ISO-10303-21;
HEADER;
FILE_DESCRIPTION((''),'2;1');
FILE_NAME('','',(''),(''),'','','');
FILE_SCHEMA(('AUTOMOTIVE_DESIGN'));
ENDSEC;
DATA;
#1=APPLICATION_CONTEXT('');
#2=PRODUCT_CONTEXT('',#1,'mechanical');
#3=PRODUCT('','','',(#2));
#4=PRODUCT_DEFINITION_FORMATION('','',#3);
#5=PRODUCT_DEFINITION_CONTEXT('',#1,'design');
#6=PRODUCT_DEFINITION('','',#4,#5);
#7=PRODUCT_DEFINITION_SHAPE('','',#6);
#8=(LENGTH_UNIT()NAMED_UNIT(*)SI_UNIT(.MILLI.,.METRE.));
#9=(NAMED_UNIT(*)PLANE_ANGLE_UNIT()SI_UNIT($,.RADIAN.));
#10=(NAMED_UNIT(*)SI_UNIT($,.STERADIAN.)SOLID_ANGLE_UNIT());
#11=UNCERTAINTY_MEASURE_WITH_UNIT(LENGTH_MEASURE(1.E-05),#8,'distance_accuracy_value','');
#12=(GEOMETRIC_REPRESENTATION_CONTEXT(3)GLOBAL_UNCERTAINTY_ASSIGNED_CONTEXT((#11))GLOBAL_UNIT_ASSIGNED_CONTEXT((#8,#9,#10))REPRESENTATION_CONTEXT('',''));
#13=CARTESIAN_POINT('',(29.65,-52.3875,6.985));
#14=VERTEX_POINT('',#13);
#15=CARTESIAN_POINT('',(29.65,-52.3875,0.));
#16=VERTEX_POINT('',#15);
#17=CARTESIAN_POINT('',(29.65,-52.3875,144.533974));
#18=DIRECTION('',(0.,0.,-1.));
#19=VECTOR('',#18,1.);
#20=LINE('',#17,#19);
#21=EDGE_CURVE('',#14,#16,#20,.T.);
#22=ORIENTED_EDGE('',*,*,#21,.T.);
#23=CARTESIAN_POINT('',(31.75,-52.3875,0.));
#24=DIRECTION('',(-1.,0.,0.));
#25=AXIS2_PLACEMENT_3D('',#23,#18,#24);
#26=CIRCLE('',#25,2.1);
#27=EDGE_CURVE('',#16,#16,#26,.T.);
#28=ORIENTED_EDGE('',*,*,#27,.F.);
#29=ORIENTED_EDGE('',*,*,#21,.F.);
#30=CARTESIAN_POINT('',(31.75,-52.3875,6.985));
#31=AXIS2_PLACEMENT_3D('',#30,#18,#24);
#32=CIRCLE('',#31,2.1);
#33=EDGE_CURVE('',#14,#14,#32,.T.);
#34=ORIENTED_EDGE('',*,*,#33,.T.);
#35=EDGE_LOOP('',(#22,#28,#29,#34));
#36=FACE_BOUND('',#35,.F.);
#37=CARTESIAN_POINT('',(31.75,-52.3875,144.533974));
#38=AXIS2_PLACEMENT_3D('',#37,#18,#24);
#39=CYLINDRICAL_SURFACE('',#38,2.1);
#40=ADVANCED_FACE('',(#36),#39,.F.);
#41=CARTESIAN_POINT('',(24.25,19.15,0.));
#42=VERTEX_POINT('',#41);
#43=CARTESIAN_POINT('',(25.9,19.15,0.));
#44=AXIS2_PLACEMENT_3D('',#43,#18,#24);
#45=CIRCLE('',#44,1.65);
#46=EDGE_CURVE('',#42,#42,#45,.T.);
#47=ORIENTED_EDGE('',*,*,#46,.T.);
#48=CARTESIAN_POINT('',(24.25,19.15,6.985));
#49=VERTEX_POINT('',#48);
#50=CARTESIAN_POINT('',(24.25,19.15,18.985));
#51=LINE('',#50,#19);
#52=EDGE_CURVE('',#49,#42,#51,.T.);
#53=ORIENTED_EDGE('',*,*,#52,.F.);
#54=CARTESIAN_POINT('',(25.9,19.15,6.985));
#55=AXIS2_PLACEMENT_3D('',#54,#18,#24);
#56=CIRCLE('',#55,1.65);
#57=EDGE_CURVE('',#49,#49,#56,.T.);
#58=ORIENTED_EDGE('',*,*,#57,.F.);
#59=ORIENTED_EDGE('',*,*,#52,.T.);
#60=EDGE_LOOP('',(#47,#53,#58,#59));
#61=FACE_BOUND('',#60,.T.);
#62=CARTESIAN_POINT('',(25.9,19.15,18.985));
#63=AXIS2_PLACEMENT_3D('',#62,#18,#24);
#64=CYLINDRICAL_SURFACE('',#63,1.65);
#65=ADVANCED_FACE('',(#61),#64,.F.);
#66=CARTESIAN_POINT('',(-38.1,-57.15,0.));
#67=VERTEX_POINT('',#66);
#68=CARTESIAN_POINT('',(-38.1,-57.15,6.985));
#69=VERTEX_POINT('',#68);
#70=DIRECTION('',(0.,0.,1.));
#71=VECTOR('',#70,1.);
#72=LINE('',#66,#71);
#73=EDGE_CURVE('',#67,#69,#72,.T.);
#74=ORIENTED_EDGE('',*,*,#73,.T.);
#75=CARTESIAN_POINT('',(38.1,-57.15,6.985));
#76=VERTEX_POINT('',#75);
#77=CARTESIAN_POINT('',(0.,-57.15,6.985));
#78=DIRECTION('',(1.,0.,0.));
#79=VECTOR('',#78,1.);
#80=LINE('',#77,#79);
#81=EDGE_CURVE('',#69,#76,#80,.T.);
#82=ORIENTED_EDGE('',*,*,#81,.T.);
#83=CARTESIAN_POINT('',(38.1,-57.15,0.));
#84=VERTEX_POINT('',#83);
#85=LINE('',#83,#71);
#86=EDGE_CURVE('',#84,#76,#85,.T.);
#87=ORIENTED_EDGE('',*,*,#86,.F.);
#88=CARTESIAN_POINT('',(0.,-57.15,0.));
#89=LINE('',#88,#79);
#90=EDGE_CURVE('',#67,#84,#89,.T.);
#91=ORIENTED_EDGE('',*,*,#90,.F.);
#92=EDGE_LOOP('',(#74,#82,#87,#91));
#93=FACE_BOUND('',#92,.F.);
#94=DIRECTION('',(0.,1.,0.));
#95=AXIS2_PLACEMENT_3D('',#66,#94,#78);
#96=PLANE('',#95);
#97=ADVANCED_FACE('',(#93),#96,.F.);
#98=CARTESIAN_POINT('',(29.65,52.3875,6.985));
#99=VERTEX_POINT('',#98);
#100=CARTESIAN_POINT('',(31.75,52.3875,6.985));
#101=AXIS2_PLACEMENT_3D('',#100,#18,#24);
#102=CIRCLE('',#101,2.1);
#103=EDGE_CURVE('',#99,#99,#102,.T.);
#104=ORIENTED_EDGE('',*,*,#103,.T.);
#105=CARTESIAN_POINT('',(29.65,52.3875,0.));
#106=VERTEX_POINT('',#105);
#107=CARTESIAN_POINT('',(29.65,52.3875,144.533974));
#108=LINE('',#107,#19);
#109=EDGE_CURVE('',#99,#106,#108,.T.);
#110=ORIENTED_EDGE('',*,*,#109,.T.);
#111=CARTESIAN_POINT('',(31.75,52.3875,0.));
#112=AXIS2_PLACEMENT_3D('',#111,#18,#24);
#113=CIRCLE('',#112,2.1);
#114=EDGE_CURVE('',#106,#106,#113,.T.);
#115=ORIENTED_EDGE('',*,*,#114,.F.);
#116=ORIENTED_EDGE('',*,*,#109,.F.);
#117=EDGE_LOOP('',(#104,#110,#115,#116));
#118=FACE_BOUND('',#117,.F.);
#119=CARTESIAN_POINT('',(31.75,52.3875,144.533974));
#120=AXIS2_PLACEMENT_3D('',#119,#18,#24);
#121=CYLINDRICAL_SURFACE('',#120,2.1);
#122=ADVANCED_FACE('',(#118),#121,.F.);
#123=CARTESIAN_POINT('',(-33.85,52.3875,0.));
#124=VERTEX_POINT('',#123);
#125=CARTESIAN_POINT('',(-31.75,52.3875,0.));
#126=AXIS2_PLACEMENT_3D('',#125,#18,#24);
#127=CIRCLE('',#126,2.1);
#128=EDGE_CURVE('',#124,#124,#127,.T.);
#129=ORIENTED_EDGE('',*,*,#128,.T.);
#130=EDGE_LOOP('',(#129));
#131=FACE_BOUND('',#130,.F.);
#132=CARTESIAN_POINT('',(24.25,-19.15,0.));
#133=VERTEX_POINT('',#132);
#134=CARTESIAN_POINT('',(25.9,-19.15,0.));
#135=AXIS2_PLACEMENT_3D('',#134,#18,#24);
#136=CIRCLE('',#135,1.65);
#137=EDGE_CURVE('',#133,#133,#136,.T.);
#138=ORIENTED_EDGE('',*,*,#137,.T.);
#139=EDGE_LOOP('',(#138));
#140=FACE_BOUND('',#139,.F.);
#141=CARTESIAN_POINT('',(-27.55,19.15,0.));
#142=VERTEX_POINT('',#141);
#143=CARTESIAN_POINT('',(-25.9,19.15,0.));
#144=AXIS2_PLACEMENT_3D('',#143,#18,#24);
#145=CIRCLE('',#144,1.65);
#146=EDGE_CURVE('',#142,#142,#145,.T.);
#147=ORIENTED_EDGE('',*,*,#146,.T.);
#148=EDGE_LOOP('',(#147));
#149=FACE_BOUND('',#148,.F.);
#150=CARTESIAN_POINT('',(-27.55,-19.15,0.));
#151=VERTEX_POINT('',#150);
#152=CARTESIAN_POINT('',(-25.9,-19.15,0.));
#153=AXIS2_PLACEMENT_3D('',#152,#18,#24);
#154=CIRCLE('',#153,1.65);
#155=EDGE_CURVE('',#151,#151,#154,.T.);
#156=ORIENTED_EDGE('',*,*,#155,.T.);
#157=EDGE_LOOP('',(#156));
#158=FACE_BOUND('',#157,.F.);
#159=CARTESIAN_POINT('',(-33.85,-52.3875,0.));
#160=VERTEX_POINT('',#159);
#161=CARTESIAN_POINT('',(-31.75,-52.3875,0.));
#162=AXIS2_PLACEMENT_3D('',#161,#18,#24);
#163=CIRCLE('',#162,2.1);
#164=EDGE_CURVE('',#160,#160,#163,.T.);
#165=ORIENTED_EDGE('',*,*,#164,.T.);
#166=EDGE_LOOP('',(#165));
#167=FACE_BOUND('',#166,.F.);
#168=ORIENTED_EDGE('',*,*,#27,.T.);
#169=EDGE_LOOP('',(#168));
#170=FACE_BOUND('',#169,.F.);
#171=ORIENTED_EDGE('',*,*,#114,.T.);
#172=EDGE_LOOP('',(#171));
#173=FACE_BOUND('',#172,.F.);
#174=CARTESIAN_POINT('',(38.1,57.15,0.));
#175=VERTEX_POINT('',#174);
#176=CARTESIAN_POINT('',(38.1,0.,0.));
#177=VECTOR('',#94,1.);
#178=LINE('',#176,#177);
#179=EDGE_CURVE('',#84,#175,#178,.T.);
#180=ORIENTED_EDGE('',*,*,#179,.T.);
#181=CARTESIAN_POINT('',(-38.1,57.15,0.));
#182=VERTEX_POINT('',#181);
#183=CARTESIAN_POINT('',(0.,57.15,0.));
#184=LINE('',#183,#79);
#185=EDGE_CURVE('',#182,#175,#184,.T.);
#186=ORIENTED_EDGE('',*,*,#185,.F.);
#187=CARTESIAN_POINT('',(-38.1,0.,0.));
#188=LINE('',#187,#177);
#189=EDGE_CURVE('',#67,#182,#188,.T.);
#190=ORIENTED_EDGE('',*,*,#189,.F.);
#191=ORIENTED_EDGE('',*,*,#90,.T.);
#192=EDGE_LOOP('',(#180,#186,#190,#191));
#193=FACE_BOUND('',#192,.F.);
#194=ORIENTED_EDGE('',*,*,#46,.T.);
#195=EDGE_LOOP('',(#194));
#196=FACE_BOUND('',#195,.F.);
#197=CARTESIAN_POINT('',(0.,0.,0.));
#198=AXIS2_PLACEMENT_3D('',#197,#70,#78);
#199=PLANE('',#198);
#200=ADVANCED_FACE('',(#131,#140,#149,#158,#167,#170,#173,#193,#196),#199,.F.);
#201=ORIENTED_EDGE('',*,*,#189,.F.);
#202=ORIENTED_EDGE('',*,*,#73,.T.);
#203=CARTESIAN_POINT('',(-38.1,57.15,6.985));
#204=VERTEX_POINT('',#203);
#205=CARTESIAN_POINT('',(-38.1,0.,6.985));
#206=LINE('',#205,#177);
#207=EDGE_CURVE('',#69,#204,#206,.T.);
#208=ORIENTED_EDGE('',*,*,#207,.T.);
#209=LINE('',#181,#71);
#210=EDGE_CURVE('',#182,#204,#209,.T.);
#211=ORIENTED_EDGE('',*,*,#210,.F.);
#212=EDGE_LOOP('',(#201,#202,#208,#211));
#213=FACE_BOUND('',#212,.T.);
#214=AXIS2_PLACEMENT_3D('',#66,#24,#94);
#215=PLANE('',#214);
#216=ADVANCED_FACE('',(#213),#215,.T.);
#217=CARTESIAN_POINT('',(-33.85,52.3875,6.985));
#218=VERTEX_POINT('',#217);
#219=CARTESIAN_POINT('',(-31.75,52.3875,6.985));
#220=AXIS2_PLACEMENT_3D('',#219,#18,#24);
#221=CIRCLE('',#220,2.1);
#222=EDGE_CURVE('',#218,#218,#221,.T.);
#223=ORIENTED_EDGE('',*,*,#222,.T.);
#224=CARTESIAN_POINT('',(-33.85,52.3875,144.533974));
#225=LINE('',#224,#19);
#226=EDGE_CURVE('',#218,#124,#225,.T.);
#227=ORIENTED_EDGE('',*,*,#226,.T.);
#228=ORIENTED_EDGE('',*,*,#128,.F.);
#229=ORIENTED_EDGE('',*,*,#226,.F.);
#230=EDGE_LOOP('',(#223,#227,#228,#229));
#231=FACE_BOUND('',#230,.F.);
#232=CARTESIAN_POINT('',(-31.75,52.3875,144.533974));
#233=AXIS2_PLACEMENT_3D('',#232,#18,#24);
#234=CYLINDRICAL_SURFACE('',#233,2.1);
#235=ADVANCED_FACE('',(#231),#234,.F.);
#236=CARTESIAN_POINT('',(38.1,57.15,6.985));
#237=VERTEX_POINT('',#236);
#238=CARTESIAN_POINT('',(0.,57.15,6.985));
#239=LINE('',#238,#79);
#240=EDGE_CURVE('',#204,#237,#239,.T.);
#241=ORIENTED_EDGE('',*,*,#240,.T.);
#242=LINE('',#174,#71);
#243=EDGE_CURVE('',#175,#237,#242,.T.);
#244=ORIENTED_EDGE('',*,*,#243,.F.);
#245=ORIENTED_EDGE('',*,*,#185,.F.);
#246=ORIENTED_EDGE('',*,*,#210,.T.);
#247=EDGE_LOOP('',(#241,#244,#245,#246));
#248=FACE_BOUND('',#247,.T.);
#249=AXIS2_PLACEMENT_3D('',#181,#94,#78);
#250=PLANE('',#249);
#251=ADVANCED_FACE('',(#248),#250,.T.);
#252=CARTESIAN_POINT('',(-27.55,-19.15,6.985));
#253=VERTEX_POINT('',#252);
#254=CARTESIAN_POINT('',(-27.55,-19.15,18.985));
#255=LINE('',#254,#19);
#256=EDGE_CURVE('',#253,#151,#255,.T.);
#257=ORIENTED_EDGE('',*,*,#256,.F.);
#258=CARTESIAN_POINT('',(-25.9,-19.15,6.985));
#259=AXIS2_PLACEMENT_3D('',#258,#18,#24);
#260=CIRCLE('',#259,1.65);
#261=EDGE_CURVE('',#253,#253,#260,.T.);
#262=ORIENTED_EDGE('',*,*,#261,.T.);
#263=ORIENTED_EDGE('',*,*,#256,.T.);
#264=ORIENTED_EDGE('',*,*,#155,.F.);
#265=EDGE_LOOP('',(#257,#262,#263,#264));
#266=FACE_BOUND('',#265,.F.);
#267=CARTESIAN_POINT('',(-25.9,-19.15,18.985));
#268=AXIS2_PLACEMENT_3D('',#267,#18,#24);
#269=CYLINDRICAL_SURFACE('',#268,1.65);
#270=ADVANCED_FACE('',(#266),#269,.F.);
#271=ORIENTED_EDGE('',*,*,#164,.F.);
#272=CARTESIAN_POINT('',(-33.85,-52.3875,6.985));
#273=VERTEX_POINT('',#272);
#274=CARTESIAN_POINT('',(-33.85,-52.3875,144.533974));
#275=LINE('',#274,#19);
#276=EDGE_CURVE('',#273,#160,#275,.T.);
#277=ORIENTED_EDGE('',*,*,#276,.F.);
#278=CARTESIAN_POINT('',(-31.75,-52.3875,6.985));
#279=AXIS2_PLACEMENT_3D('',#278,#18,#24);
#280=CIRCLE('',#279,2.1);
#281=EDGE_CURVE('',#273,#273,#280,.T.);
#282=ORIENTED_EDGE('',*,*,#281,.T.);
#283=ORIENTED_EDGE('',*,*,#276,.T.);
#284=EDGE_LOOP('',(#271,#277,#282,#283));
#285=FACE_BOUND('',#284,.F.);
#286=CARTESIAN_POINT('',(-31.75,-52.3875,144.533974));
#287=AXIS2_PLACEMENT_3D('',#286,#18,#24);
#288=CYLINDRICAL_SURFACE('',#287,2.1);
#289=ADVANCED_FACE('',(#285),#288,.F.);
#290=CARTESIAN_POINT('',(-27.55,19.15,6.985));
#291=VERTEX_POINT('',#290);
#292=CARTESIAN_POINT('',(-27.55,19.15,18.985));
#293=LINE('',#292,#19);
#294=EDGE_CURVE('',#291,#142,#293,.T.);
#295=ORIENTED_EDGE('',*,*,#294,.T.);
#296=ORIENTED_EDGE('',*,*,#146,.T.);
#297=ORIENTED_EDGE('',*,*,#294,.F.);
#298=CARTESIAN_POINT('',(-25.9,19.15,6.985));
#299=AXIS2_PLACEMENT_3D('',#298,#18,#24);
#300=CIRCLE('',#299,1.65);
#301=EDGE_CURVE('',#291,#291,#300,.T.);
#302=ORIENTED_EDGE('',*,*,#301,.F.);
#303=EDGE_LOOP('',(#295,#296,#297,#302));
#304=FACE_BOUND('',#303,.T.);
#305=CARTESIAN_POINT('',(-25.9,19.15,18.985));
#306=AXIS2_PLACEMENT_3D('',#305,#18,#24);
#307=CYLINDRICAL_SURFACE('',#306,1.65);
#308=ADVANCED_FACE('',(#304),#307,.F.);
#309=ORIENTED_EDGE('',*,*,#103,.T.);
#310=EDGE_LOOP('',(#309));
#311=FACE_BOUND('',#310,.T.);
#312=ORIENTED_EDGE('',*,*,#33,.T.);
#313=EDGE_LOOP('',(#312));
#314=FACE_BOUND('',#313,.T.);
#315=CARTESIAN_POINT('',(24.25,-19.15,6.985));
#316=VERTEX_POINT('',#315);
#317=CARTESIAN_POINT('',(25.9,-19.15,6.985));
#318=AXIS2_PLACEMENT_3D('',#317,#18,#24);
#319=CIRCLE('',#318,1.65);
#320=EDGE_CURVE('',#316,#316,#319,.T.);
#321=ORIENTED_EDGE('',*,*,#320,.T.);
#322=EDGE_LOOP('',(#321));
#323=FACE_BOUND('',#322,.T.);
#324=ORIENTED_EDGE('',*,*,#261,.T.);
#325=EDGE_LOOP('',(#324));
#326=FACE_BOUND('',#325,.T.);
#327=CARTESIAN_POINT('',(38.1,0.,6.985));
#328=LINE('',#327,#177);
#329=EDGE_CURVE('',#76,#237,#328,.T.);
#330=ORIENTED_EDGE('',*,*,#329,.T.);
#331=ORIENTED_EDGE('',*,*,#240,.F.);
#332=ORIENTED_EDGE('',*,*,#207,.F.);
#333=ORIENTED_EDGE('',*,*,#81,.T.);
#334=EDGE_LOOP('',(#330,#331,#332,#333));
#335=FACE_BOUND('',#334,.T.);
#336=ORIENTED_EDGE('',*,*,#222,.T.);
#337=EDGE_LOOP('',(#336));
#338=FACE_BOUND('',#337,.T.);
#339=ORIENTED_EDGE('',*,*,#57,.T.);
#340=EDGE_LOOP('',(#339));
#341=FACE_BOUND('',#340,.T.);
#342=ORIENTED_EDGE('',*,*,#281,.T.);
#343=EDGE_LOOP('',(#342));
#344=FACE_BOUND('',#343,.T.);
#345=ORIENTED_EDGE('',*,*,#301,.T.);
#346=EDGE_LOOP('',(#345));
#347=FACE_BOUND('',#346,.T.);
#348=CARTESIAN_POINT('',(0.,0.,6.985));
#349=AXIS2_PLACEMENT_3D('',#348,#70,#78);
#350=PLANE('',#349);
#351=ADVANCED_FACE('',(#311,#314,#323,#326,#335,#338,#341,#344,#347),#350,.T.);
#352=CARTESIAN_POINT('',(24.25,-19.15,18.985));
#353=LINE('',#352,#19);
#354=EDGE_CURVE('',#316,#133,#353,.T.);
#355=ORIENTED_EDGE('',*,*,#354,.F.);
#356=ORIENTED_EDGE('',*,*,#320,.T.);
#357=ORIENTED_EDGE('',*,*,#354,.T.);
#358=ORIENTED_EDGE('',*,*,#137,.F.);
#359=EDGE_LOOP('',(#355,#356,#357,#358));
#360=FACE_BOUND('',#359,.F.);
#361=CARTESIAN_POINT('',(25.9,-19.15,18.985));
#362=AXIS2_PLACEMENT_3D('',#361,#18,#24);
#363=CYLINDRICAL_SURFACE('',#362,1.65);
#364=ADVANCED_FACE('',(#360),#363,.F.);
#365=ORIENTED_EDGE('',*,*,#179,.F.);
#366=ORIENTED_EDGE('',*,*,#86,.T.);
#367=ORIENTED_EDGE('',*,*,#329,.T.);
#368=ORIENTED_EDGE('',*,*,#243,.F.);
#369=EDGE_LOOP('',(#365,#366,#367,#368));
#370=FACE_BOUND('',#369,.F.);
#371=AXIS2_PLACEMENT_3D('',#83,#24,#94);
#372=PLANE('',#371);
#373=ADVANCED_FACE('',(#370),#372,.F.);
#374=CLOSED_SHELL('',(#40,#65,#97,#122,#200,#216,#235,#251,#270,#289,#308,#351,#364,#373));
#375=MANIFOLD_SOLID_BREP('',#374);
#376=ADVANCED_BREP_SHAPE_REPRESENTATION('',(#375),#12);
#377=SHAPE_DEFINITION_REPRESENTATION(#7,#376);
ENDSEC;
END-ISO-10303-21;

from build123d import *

# Parameters (mm, degrees)
F0_W     = 76.2
F0_H     = 114.3
F1_DEPTH = 6.985
F3_D     = 4.2
F6_D     = 3.3
F6_DEPTH = 12
F6_TIP   = 0.9914200214


# Not quite as in the source:
# - a pattern or mirror of a feature is missing from the dataset's text; its kind, count and spacing are read off the source's solid
# - a feature names something its author has since deleted; it is built from what else it names


with BuildPart() as f1:
    # F0 (on Top) → F1 (new body)
    with BuildSketch(Plane.XY):
        Rectangle(F0_W, F0_H)
    extrude(amount=F1_DEPTH)

    # F3 (through all)
    with Locations(Plane.XY.offset(6.985)):
        with Locations((-31.75, 52.3875), (31.75, 52.3875), (31.75, -52.3875), (-31.75, -52.3875)):
            Hole(F3_D / 2)

    # F6
    with Locations(Plane.XY.offset(6.985)):
        with Locations((-25.9, -19.15), (25.9, -19.15)):
            f6 = Hole(F6_D / 2, depth=F6_DEPTH)
            with Locations((0, 0, -(F6_DEPTH + F6_TIP / 2))):  # 118° drill point
                Cone(0, F6_D / 2, F6_TIP, mode=Mode.SUBTRACT)

    # F6_copies: F6 across plane
    add(f6.mirror(Plane.ZX), mode=Mode.SUBTRACT)


solid = f1.part
